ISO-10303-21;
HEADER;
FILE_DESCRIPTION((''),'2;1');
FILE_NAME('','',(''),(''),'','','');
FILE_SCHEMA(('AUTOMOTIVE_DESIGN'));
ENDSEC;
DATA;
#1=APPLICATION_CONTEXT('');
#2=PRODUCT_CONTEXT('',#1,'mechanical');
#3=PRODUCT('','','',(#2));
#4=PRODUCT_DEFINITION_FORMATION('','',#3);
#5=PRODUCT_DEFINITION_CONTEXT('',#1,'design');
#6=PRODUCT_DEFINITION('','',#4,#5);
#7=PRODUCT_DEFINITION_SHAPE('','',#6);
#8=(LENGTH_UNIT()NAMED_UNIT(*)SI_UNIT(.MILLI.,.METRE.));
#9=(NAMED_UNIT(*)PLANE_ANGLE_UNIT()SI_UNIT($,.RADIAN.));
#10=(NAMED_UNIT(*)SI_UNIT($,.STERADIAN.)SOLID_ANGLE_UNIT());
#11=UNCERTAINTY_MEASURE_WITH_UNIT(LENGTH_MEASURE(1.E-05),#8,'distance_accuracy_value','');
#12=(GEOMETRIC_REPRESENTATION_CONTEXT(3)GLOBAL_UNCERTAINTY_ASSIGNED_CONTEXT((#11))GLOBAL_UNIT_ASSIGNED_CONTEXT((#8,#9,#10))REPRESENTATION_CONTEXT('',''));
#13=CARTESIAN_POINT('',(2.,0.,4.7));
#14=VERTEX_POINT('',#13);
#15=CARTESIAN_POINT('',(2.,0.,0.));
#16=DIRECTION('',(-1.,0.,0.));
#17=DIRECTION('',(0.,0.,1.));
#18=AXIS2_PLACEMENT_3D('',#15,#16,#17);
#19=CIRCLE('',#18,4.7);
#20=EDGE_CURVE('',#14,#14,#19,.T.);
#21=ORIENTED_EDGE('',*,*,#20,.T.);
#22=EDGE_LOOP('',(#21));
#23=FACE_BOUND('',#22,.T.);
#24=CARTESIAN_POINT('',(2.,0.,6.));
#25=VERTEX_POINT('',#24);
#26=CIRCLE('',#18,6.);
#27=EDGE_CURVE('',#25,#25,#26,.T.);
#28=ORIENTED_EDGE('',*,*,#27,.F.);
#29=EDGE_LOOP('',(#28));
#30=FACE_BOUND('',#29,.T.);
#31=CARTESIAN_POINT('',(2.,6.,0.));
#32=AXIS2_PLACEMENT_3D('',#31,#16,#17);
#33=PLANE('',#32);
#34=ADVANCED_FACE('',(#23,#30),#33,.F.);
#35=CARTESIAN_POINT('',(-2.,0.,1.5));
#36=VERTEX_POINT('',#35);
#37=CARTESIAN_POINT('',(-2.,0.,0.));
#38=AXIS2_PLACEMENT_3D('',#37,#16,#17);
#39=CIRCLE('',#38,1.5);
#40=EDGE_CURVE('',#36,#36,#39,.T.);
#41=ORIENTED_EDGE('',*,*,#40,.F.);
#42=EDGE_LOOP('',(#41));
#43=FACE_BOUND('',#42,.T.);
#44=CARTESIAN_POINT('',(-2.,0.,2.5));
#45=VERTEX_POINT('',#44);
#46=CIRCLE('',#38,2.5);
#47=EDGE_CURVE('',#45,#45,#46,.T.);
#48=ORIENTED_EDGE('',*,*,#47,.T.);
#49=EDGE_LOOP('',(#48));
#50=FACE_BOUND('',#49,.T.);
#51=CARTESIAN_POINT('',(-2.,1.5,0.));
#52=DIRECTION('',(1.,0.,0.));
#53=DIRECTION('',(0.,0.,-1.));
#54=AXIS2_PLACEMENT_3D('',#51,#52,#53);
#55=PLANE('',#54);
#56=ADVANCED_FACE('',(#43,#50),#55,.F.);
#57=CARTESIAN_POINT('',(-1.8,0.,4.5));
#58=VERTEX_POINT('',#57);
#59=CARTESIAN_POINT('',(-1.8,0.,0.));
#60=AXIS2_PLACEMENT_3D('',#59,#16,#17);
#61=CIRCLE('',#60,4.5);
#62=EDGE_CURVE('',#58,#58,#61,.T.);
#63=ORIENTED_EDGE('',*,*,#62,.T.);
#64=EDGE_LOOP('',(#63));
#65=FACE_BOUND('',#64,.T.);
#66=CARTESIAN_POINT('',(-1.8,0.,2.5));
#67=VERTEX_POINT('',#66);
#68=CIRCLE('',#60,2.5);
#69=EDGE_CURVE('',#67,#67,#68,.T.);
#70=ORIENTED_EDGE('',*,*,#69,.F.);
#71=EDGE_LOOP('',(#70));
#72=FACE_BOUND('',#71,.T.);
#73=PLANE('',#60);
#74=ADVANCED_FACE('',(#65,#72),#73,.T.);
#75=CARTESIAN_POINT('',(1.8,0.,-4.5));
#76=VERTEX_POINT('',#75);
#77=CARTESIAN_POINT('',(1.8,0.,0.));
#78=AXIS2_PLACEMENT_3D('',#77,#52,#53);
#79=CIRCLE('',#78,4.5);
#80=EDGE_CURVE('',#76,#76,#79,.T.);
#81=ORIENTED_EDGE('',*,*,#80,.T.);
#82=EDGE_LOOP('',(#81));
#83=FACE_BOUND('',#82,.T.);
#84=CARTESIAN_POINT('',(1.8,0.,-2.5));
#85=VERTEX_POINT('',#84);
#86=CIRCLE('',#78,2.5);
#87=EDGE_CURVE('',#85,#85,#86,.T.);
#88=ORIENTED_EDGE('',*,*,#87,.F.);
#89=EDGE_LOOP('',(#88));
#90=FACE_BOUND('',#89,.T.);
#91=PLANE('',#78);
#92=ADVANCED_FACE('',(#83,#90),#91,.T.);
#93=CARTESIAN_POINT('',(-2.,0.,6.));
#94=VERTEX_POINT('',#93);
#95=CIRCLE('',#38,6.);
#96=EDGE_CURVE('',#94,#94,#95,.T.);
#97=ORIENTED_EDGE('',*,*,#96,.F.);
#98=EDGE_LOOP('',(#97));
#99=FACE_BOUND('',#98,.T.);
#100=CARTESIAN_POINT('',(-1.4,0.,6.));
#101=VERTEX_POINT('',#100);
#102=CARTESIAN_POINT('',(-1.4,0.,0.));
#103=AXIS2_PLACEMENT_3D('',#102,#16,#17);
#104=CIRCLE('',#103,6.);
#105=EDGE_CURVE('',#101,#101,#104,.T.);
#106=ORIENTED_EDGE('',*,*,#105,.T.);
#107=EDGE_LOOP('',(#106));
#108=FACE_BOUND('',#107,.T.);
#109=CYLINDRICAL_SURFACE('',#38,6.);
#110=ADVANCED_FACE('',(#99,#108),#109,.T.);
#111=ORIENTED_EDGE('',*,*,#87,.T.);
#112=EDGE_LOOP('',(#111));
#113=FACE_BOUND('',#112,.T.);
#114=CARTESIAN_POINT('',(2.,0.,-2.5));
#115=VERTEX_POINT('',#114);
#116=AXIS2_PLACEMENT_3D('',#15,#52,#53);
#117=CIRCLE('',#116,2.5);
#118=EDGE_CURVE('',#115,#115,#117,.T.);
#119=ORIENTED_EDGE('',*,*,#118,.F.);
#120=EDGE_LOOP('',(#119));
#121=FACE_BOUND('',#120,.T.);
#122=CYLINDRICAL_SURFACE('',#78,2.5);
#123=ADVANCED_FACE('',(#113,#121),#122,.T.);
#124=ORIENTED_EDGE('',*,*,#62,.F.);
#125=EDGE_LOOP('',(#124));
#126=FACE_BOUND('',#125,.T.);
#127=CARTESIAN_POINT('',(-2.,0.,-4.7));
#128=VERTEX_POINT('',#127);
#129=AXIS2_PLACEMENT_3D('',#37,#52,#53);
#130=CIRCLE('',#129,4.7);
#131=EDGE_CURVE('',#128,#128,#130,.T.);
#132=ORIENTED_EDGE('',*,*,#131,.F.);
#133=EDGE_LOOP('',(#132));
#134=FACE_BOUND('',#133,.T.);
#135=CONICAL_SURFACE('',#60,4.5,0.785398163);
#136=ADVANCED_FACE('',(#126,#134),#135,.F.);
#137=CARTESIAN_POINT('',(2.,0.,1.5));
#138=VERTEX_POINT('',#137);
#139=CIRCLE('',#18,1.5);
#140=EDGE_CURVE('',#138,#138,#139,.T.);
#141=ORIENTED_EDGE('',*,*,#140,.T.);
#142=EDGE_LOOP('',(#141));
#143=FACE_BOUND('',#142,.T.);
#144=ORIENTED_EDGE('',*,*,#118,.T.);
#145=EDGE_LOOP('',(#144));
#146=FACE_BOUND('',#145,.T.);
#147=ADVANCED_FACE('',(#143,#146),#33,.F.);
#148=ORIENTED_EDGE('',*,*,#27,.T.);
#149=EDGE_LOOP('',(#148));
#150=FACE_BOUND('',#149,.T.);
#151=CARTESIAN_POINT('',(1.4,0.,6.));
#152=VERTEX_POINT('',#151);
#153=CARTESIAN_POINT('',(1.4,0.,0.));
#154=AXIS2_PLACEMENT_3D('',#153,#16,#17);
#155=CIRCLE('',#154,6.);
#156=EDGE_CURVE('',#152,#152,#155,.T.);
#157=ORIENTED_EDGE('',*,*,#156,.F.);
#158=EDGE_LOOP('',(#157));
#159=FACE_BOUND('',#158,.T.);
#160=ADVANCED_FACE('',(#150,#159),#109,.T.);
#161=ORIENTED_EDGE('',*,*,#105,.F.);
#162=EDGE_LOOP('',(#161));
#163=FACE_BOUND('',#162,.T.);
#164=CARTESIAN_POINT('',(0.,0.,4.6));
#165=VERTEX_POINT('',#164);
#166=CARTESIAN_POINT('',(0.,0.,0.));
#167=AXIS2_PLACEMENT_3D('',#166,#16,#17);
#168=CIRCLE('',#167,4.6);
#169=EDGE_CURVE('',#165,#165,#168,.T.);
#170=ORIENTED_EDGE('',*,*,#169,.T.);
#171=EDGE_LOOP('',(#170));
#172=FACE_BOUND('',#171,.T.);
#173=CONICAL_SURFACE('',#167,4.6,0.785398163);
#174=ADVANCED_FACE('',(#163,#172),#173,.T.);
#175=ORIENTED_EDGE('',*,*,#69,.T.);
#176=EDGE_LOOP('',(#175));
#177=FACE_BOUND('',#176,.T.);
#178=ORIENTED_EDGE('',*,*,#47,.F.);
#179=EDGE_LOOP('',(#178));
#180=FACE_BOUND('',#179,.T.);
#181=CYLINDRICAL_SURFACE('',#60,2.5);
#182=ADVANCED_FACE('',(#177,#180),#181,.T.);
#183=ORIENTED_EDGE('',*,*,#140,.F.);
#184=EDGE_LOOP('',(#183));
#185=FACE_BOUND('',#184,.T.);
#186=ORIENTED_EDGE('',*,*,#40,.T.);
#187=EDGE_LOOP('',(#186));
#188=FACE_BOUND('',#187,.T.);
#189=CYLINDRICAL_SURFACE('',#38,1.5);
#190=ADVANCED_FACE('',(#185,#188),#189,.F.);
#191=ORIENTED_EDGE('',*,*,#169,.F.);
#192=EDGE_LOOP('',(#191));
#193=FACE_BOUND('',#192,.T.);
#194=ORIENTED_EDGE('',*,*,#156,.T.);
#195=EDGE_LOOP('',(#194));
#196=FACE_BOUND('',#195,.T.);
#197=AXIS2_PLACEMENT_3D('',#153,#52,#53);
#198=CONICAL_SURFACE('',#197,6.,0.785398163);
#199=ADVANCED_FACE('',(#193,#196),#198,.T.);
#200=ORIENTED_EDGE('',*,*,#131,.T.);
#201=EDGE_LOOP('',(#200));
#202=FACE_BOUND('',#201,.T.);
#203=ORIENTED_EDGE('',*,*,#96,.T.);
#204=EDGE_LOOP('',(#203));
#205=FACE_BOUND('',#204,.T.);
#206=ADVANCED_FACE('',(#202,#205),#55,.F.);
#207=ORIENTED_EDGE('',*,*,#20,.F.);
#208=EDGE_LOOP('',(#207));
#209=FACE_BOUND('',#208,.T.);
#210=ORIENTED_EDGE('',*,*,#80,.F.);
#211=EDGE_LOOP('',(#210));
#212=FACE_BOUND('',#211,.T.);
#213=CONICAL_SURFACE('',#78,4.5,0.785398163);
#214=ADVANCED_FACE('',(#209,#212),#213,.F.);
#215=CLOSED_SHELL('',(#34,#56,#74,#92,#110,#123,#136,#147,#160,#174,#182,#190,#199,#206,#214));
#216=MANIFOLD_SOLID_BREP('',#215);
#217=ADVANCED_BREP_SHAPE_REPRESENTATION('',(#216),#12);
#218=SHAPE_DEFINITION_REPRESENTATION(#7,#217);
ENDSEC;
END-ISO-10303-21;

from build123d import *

# Parameters (mm, degrees)
SKETCH_2_R          = 4.5
SKETCH_2_R_2        = 2.5
CUT_EXTRUDE_1_DEPTH = 0.2
CHAMFER_1_SIZE      = 0.2
CUT_EXTRUDE_START   = -0.2
SKETCH_3_R          = 4.5
SKETCH_3_R_2        = 2.5
CUT_EXTRUDE_2_DEPTH = 0.2
CHAMFER_2_SIZE      = 0.2


with BuildPart() as part:
    # 草图1 → 旋转1 (revolve)
    with BuildSketch(Plane.XY, mode=Mode.PRIVATE) as revolve_1_sk:
        Polygon((-2, 1.5), (-2, 6), (-1.4, 6), (0, 4.6), (1.4, 6), (2, 6), (2, 1.5), align=None)
    revolve(revolve_1_sk.sketch.rotate(Axis((-2, 0, 0), (1, 0, 0)), 90), axis=Axis((-2, 0, 0), (1, 0, 0)))

    # 草图2 → 切除-拉伸1 (cut)
    with BuildSketch(Plane(origin=(2, 0, 0), x_dir=(0, 0, -1), z_dir=(1, 0, 0))):
        Circle(SKETCH_2_R)
        Circle(SKETCH_2_R_2, mode=Mode.SUBTRACT)
    extrude(amount=-CUT_EXTRUDE_1_DEPTH, mode=Mode.SUBTRACT)

    # 倒角1
    chamfer_1_edges = [part.edges().sort_by_distance(p)[0] for p in [
        (2, 0, 4.5),
    ]]
    chamfer(chamfer_1_edges, length=CHAMFER_1_SIZE - 0.0001)  # a hair under: the kernel refuses the full size

    # 草图3 → 切除-拉伸2 (cut)
    with BuildSketch(Plane.ZY.offset(2).offset(CUT_EXTRUDE_START)):
        Circle(SKETCH_3_R)
        with Locations(Location((0, 0, 0), (0, 0, 180))):
            Circle(SKETCH_3_R_2, mode=Mode.SUBTRACT)
    extrude(amount=CUT_EXTRUDE_2_DEPTH, mode=Mode.SUBTRACT)

    # 倒角2
    chamfer_2_edges = [part.edges().sort_by_distance(p)[0] for p in [
        (-2, 0, -4.5),
    ]]
    chamfer(chamfer_2_edges, length=CHAMFER_2_SIZE - 0.0001)  # a hair under: the kernel refuses the full size


solid = part.part
